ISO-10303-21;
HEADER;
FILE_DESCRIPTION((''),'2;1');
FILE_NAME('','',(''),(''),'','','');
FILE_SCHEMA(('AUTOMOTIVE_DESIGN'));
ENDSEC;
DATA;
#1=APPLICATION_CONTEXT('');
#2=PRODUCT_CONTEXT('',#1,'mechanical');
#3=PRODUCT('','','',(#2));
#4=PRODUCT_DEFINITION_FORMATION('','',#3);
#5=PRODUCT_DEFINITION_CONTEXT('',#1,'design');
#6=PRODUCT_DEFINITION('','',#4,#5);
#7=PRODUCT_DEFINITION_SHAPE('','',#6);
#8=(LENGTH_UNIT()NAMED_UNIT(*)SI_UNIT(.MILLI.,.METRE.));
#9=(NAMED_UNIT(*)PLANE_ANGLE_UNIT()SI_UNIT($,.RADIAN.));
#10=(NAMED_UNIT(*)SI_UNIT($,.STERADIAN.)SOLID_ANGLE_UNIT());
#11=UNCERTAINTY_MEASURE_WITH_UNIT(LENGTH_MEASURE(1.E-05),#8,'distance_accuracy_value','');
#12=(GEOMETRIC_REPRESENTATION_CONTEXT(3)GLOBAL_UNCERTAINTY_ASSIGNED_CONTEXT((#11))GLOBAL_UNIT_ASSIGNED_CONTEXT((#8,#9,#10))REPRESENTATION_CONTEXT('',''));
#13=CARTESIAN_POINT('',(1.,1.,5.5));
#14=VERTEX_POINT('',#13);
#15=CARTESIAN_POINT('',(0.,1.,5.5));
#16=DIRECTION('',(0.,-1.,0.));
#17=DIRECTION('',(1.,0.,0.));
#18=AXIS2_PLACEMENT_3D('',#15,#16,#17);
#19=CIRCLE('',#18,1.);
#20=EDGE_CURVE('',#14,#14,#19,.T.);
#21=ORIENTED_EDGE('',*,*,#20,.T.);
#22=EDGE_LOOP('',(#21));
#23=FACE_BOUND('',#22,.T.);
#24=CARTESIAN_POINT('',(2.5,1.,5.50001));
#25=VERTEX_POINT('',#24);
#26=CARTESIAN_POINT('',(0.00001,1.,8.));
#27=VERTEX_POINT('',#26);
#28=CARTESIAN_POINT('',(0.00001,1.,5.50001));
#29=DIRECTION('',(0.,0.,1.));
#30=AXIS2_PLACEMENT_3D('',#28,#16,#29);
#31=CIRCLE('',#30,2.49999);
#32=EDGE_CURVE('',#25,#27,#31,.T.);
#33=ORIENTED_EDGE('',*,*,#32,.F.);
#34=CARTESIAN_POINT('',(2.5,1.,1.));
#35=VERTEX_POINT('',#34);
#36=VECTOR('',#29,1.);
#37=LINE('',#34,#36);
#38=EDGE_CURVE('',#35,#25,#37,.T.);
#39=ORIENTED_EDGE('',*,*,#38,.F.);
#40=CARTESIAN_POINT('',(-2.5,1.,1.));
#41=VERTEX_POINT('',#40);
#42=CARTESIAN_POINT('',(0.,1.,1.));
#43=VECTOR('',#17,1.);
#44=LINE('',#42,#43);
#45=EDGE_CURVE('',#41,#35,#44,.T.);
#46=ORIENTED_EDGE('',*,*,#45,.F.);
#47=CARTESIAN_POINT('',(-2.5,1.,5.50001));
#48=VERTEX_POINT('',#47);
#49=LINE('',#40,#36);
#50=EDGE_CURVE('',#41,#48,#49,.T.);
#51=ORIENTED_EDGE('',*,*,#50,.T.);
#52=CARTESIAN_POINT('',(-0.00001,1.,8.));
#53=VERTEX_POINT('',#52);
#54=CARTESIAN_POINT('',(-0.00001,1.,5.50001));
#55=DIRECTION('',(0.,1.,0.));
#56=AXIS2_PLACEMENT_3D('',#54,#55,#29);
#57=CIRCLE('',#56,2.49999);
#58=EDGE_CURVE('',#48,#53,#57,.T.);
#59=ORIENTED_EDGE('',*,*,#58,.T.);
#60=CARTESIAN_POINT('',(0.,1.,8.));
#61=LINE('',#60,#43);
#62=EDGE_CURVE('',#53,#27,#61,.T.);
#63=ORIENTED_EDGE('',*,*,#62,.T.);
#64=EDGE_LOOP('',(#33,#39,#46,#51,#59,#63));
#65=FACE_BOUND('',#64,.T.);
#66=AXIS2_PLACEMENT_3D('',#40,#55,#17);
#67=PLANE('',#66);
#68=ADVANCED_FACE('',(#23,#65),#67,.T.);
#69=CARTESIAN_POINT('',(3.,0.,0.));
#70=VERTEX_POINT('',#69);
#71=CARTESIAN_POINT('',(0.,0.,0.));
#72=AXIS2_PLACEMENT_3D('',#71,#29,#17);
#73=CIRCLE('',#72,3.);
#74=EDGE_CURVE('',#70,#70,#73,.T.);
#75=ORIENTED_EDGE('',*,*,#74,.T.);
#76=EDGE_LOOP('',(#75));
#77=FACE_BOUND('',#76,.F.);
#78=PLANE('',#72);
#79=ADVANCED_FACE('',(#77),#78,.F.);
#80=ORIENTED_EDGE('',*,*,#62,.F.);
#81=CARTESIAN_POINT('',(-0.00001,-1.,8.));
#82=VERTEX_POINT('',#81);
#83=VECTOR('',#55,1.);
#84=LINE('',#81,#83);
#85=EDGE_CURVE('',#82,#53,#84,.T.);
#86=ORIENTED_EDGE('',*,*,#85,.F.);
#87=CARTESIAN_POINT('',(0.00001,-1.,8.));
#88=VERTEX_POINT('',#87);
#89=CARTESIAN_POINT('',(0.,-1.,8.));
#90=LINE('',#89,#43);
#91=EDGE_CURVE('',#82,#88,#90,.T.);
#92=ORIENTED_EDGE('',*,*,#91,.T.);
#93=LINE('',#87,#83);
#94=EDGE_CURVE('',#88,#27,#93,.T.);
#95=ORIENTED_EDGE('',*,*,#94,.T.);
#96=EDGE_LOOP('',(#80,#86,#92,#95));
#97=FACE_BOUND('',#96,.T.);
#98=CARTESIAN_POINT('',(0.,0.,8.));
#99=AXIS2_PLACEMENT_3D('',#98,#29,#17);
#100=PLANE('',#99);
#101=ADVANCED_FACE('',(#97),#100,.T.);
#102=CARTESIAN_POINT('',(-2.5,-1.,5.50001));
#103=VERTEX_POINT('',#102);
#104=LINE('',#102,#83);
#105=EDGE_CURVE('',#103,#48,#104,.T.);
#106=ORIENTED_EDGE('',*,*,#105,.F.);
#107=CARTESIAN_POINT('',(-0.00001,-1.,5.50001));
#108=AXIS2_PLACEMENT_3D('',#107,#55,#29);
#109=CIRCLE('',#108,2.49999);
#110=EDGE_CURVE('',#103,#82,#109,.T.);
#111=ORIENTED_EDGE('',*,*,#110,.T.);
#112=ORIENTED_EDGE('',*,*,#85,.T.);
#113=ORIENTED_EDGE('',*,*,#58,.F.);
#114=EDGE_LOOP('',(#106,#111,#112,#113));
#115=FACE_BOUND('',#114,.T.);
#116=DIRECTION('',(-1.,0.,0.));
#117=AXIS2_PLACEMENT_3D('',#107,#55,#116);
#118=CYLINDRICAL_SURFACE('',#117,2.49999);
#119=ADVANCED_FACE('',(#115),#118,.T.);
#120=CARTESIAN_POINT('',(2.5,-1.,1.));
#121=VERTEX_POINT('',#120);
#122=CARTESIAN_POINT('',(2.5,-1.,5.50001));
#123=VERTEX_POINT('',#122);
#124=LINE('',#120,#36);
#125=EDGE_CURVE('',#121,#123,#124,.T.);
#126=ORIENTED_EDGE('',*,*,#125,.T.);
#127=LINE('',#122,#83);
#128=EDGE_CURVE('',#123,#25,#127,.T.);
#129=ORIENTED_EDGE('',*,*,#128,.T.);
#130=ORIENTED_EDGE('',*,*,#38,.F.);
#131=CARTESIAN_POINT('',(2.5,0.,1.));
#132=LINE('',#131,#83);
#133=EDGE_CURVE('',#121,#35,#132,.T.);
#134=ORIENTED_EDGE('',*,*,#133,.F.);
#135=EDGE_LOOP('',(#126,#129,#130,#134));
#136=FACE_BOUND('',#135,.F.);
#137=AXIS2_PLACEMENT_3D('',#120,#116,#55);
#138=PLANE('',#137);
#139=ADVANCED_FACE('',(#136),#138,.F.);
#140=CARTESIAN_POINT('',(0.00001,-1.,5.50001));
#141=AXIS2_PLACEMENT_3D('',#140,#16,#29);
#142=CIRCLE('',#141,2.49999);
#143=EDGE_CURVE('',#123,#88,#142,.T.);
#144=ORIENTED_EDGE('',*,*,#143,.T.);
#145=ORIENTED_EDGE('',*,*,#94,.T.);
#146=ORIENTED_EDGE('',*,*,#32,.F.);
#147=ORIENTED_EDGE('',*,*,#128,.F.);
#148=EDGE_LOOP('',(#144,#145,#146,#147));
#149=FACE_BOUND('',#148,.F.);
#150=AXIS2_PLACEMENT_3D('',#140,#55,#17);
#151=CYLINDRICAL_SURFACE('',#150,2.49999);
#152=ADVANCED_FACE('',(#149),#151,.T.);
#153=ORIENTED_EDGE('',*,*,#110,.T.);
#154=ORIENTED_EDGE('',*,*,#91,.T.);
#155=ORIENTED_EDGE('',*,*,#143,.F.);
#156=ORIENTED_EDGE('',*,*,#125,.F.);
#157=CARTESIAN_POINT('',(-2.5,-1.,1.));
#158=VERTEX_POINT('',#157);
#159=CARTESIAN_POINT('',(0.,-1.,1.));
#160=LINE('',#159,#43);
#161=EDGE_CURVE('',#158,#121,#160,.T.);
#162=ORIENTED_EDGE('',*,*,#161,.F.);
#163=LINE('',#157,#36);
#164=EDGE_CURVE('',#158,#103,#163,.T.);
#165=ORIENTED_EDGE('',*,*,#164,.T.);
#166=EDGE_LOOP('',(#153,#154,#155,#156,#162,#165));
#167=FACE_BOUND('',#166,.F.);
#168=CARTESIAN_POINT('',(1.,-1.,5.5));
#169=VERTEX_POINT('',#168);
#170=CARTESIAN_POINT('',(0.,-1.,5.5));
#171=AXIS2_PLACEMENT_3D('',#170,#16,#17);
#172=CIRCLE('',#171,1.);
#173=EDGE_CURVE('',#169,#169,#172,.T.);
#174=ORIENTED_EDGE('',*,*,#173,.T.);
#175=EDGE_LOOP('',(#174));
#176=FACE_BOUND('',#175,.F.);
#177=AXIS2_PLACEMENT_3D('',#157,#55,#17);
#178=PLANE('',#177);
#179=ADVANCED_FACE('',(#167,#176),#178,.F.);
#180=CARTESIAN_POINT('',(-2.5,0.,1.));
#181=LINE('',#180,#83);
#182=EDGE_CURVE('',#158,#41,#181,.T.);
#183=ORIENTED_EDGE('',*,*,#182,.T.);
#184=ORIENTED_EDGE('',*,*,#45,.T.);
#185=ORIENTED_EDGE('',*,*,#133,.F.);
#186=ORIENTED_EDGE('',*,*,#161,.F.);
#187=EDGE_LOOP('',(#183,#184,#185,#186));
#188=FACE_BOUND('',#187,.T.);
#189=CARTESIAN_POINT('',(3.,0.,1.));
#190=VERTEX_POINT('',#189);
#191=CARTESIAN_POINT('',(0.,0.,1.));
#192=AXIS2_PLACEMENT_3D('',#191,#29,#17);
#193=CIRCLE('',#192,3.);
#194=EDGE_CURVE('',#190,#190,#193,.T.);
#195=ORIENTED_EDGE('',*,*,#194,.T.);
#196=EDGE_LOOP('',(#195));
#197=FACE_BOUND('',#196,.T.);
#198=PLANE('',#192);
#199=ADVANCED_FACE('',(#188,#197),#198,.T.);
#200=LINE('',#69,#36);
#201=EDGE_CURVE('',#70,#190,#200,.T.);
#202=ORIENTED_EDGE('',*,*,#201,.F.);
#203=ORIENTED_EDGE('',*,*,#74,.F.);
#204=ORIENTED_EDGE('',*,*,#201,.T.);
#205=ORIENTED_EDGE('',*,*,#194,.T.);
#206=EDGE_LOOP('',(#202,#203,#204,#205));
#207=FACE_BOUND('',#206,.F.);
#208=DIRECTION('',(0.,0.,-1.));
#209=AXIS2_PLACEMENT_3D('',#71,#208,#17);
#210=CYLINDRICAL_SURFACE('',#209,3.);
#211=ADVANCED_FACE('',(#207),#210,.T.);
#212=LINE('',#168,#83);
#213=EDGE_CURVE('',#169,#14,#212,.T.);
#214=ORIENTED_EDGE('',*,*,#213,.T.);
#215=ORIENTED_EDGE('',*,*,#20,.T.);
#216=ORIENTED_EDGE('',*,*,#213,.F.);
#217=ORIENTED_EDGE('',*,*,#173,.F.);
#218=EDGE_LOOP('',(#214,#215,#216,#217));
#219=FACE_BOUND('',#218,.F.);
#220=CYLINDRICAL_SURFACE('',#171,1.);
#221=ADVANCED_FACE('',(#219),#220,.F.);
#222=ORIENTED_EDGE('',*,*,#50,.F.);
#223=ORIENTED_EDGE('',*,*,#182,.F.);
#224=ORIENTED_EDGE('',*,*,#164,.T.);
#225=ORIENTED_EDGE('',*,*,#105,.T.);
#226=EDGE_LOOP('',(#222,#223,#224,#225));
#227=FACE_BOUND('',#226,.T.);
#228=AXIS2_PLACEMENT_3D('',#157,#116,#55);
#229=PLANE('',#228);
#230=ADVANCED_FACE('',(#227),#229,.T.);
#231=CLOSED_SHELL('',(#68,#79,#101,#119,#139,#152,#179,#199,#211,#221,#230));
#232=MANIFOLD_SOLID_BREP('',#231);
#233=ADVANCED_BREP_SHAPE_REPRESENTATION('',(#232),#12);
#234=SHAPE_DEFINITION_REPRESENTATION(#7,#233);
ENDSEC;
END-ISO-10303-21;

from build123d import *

# Parameters (mm, degrees)
F0_R     = 3
F1_DEPTH = 1
F2_W     = 5
F2_H     = 2
F3_DEPTH = 7
F4_R     = 2.49999
F5_R     = 1
F6_DEPTH = 4


# Not quite as in the source:
# - a fillet or chamfer is up to 0.001 mm smaller than in the source, because OpenCascade refuses the exact size


with BuildPart() as f1:
    # F0 (on Top) → F1 (new body)
    with BuildSketch(Plane.XY):
        Circle(F0_R)
    extrude(amount=F1_DEPTH)

    # F2 (on face) → F3 (join)
    with BuildSketch(Plane.XY.offset(1)):
        Rectangle(F2_W, F2_H)
    extrude(amount=F3_DEPTH)

    # F4 (radius 2.5 in the source; OpenCascade refuses exactly that, so slightly less here)
    f4_edges = [f1.edges().sort_by_distance(p)[0] for p in [
        (-2.5, 0, 8),
        (2.5, 0, 8),
    ]]
    fillet(f4_edges, radius=F4_R)

    # F5 (on face) → F6 (cut)
    with BuildSketch(Plane.XZ.offset(1)):
        with Locations((0, 5.5)):
            Circle(F5_R)
    extrude(amount=-F6_DEPTH, mode=Mode.SUBTRACT)


solid = f1.part
